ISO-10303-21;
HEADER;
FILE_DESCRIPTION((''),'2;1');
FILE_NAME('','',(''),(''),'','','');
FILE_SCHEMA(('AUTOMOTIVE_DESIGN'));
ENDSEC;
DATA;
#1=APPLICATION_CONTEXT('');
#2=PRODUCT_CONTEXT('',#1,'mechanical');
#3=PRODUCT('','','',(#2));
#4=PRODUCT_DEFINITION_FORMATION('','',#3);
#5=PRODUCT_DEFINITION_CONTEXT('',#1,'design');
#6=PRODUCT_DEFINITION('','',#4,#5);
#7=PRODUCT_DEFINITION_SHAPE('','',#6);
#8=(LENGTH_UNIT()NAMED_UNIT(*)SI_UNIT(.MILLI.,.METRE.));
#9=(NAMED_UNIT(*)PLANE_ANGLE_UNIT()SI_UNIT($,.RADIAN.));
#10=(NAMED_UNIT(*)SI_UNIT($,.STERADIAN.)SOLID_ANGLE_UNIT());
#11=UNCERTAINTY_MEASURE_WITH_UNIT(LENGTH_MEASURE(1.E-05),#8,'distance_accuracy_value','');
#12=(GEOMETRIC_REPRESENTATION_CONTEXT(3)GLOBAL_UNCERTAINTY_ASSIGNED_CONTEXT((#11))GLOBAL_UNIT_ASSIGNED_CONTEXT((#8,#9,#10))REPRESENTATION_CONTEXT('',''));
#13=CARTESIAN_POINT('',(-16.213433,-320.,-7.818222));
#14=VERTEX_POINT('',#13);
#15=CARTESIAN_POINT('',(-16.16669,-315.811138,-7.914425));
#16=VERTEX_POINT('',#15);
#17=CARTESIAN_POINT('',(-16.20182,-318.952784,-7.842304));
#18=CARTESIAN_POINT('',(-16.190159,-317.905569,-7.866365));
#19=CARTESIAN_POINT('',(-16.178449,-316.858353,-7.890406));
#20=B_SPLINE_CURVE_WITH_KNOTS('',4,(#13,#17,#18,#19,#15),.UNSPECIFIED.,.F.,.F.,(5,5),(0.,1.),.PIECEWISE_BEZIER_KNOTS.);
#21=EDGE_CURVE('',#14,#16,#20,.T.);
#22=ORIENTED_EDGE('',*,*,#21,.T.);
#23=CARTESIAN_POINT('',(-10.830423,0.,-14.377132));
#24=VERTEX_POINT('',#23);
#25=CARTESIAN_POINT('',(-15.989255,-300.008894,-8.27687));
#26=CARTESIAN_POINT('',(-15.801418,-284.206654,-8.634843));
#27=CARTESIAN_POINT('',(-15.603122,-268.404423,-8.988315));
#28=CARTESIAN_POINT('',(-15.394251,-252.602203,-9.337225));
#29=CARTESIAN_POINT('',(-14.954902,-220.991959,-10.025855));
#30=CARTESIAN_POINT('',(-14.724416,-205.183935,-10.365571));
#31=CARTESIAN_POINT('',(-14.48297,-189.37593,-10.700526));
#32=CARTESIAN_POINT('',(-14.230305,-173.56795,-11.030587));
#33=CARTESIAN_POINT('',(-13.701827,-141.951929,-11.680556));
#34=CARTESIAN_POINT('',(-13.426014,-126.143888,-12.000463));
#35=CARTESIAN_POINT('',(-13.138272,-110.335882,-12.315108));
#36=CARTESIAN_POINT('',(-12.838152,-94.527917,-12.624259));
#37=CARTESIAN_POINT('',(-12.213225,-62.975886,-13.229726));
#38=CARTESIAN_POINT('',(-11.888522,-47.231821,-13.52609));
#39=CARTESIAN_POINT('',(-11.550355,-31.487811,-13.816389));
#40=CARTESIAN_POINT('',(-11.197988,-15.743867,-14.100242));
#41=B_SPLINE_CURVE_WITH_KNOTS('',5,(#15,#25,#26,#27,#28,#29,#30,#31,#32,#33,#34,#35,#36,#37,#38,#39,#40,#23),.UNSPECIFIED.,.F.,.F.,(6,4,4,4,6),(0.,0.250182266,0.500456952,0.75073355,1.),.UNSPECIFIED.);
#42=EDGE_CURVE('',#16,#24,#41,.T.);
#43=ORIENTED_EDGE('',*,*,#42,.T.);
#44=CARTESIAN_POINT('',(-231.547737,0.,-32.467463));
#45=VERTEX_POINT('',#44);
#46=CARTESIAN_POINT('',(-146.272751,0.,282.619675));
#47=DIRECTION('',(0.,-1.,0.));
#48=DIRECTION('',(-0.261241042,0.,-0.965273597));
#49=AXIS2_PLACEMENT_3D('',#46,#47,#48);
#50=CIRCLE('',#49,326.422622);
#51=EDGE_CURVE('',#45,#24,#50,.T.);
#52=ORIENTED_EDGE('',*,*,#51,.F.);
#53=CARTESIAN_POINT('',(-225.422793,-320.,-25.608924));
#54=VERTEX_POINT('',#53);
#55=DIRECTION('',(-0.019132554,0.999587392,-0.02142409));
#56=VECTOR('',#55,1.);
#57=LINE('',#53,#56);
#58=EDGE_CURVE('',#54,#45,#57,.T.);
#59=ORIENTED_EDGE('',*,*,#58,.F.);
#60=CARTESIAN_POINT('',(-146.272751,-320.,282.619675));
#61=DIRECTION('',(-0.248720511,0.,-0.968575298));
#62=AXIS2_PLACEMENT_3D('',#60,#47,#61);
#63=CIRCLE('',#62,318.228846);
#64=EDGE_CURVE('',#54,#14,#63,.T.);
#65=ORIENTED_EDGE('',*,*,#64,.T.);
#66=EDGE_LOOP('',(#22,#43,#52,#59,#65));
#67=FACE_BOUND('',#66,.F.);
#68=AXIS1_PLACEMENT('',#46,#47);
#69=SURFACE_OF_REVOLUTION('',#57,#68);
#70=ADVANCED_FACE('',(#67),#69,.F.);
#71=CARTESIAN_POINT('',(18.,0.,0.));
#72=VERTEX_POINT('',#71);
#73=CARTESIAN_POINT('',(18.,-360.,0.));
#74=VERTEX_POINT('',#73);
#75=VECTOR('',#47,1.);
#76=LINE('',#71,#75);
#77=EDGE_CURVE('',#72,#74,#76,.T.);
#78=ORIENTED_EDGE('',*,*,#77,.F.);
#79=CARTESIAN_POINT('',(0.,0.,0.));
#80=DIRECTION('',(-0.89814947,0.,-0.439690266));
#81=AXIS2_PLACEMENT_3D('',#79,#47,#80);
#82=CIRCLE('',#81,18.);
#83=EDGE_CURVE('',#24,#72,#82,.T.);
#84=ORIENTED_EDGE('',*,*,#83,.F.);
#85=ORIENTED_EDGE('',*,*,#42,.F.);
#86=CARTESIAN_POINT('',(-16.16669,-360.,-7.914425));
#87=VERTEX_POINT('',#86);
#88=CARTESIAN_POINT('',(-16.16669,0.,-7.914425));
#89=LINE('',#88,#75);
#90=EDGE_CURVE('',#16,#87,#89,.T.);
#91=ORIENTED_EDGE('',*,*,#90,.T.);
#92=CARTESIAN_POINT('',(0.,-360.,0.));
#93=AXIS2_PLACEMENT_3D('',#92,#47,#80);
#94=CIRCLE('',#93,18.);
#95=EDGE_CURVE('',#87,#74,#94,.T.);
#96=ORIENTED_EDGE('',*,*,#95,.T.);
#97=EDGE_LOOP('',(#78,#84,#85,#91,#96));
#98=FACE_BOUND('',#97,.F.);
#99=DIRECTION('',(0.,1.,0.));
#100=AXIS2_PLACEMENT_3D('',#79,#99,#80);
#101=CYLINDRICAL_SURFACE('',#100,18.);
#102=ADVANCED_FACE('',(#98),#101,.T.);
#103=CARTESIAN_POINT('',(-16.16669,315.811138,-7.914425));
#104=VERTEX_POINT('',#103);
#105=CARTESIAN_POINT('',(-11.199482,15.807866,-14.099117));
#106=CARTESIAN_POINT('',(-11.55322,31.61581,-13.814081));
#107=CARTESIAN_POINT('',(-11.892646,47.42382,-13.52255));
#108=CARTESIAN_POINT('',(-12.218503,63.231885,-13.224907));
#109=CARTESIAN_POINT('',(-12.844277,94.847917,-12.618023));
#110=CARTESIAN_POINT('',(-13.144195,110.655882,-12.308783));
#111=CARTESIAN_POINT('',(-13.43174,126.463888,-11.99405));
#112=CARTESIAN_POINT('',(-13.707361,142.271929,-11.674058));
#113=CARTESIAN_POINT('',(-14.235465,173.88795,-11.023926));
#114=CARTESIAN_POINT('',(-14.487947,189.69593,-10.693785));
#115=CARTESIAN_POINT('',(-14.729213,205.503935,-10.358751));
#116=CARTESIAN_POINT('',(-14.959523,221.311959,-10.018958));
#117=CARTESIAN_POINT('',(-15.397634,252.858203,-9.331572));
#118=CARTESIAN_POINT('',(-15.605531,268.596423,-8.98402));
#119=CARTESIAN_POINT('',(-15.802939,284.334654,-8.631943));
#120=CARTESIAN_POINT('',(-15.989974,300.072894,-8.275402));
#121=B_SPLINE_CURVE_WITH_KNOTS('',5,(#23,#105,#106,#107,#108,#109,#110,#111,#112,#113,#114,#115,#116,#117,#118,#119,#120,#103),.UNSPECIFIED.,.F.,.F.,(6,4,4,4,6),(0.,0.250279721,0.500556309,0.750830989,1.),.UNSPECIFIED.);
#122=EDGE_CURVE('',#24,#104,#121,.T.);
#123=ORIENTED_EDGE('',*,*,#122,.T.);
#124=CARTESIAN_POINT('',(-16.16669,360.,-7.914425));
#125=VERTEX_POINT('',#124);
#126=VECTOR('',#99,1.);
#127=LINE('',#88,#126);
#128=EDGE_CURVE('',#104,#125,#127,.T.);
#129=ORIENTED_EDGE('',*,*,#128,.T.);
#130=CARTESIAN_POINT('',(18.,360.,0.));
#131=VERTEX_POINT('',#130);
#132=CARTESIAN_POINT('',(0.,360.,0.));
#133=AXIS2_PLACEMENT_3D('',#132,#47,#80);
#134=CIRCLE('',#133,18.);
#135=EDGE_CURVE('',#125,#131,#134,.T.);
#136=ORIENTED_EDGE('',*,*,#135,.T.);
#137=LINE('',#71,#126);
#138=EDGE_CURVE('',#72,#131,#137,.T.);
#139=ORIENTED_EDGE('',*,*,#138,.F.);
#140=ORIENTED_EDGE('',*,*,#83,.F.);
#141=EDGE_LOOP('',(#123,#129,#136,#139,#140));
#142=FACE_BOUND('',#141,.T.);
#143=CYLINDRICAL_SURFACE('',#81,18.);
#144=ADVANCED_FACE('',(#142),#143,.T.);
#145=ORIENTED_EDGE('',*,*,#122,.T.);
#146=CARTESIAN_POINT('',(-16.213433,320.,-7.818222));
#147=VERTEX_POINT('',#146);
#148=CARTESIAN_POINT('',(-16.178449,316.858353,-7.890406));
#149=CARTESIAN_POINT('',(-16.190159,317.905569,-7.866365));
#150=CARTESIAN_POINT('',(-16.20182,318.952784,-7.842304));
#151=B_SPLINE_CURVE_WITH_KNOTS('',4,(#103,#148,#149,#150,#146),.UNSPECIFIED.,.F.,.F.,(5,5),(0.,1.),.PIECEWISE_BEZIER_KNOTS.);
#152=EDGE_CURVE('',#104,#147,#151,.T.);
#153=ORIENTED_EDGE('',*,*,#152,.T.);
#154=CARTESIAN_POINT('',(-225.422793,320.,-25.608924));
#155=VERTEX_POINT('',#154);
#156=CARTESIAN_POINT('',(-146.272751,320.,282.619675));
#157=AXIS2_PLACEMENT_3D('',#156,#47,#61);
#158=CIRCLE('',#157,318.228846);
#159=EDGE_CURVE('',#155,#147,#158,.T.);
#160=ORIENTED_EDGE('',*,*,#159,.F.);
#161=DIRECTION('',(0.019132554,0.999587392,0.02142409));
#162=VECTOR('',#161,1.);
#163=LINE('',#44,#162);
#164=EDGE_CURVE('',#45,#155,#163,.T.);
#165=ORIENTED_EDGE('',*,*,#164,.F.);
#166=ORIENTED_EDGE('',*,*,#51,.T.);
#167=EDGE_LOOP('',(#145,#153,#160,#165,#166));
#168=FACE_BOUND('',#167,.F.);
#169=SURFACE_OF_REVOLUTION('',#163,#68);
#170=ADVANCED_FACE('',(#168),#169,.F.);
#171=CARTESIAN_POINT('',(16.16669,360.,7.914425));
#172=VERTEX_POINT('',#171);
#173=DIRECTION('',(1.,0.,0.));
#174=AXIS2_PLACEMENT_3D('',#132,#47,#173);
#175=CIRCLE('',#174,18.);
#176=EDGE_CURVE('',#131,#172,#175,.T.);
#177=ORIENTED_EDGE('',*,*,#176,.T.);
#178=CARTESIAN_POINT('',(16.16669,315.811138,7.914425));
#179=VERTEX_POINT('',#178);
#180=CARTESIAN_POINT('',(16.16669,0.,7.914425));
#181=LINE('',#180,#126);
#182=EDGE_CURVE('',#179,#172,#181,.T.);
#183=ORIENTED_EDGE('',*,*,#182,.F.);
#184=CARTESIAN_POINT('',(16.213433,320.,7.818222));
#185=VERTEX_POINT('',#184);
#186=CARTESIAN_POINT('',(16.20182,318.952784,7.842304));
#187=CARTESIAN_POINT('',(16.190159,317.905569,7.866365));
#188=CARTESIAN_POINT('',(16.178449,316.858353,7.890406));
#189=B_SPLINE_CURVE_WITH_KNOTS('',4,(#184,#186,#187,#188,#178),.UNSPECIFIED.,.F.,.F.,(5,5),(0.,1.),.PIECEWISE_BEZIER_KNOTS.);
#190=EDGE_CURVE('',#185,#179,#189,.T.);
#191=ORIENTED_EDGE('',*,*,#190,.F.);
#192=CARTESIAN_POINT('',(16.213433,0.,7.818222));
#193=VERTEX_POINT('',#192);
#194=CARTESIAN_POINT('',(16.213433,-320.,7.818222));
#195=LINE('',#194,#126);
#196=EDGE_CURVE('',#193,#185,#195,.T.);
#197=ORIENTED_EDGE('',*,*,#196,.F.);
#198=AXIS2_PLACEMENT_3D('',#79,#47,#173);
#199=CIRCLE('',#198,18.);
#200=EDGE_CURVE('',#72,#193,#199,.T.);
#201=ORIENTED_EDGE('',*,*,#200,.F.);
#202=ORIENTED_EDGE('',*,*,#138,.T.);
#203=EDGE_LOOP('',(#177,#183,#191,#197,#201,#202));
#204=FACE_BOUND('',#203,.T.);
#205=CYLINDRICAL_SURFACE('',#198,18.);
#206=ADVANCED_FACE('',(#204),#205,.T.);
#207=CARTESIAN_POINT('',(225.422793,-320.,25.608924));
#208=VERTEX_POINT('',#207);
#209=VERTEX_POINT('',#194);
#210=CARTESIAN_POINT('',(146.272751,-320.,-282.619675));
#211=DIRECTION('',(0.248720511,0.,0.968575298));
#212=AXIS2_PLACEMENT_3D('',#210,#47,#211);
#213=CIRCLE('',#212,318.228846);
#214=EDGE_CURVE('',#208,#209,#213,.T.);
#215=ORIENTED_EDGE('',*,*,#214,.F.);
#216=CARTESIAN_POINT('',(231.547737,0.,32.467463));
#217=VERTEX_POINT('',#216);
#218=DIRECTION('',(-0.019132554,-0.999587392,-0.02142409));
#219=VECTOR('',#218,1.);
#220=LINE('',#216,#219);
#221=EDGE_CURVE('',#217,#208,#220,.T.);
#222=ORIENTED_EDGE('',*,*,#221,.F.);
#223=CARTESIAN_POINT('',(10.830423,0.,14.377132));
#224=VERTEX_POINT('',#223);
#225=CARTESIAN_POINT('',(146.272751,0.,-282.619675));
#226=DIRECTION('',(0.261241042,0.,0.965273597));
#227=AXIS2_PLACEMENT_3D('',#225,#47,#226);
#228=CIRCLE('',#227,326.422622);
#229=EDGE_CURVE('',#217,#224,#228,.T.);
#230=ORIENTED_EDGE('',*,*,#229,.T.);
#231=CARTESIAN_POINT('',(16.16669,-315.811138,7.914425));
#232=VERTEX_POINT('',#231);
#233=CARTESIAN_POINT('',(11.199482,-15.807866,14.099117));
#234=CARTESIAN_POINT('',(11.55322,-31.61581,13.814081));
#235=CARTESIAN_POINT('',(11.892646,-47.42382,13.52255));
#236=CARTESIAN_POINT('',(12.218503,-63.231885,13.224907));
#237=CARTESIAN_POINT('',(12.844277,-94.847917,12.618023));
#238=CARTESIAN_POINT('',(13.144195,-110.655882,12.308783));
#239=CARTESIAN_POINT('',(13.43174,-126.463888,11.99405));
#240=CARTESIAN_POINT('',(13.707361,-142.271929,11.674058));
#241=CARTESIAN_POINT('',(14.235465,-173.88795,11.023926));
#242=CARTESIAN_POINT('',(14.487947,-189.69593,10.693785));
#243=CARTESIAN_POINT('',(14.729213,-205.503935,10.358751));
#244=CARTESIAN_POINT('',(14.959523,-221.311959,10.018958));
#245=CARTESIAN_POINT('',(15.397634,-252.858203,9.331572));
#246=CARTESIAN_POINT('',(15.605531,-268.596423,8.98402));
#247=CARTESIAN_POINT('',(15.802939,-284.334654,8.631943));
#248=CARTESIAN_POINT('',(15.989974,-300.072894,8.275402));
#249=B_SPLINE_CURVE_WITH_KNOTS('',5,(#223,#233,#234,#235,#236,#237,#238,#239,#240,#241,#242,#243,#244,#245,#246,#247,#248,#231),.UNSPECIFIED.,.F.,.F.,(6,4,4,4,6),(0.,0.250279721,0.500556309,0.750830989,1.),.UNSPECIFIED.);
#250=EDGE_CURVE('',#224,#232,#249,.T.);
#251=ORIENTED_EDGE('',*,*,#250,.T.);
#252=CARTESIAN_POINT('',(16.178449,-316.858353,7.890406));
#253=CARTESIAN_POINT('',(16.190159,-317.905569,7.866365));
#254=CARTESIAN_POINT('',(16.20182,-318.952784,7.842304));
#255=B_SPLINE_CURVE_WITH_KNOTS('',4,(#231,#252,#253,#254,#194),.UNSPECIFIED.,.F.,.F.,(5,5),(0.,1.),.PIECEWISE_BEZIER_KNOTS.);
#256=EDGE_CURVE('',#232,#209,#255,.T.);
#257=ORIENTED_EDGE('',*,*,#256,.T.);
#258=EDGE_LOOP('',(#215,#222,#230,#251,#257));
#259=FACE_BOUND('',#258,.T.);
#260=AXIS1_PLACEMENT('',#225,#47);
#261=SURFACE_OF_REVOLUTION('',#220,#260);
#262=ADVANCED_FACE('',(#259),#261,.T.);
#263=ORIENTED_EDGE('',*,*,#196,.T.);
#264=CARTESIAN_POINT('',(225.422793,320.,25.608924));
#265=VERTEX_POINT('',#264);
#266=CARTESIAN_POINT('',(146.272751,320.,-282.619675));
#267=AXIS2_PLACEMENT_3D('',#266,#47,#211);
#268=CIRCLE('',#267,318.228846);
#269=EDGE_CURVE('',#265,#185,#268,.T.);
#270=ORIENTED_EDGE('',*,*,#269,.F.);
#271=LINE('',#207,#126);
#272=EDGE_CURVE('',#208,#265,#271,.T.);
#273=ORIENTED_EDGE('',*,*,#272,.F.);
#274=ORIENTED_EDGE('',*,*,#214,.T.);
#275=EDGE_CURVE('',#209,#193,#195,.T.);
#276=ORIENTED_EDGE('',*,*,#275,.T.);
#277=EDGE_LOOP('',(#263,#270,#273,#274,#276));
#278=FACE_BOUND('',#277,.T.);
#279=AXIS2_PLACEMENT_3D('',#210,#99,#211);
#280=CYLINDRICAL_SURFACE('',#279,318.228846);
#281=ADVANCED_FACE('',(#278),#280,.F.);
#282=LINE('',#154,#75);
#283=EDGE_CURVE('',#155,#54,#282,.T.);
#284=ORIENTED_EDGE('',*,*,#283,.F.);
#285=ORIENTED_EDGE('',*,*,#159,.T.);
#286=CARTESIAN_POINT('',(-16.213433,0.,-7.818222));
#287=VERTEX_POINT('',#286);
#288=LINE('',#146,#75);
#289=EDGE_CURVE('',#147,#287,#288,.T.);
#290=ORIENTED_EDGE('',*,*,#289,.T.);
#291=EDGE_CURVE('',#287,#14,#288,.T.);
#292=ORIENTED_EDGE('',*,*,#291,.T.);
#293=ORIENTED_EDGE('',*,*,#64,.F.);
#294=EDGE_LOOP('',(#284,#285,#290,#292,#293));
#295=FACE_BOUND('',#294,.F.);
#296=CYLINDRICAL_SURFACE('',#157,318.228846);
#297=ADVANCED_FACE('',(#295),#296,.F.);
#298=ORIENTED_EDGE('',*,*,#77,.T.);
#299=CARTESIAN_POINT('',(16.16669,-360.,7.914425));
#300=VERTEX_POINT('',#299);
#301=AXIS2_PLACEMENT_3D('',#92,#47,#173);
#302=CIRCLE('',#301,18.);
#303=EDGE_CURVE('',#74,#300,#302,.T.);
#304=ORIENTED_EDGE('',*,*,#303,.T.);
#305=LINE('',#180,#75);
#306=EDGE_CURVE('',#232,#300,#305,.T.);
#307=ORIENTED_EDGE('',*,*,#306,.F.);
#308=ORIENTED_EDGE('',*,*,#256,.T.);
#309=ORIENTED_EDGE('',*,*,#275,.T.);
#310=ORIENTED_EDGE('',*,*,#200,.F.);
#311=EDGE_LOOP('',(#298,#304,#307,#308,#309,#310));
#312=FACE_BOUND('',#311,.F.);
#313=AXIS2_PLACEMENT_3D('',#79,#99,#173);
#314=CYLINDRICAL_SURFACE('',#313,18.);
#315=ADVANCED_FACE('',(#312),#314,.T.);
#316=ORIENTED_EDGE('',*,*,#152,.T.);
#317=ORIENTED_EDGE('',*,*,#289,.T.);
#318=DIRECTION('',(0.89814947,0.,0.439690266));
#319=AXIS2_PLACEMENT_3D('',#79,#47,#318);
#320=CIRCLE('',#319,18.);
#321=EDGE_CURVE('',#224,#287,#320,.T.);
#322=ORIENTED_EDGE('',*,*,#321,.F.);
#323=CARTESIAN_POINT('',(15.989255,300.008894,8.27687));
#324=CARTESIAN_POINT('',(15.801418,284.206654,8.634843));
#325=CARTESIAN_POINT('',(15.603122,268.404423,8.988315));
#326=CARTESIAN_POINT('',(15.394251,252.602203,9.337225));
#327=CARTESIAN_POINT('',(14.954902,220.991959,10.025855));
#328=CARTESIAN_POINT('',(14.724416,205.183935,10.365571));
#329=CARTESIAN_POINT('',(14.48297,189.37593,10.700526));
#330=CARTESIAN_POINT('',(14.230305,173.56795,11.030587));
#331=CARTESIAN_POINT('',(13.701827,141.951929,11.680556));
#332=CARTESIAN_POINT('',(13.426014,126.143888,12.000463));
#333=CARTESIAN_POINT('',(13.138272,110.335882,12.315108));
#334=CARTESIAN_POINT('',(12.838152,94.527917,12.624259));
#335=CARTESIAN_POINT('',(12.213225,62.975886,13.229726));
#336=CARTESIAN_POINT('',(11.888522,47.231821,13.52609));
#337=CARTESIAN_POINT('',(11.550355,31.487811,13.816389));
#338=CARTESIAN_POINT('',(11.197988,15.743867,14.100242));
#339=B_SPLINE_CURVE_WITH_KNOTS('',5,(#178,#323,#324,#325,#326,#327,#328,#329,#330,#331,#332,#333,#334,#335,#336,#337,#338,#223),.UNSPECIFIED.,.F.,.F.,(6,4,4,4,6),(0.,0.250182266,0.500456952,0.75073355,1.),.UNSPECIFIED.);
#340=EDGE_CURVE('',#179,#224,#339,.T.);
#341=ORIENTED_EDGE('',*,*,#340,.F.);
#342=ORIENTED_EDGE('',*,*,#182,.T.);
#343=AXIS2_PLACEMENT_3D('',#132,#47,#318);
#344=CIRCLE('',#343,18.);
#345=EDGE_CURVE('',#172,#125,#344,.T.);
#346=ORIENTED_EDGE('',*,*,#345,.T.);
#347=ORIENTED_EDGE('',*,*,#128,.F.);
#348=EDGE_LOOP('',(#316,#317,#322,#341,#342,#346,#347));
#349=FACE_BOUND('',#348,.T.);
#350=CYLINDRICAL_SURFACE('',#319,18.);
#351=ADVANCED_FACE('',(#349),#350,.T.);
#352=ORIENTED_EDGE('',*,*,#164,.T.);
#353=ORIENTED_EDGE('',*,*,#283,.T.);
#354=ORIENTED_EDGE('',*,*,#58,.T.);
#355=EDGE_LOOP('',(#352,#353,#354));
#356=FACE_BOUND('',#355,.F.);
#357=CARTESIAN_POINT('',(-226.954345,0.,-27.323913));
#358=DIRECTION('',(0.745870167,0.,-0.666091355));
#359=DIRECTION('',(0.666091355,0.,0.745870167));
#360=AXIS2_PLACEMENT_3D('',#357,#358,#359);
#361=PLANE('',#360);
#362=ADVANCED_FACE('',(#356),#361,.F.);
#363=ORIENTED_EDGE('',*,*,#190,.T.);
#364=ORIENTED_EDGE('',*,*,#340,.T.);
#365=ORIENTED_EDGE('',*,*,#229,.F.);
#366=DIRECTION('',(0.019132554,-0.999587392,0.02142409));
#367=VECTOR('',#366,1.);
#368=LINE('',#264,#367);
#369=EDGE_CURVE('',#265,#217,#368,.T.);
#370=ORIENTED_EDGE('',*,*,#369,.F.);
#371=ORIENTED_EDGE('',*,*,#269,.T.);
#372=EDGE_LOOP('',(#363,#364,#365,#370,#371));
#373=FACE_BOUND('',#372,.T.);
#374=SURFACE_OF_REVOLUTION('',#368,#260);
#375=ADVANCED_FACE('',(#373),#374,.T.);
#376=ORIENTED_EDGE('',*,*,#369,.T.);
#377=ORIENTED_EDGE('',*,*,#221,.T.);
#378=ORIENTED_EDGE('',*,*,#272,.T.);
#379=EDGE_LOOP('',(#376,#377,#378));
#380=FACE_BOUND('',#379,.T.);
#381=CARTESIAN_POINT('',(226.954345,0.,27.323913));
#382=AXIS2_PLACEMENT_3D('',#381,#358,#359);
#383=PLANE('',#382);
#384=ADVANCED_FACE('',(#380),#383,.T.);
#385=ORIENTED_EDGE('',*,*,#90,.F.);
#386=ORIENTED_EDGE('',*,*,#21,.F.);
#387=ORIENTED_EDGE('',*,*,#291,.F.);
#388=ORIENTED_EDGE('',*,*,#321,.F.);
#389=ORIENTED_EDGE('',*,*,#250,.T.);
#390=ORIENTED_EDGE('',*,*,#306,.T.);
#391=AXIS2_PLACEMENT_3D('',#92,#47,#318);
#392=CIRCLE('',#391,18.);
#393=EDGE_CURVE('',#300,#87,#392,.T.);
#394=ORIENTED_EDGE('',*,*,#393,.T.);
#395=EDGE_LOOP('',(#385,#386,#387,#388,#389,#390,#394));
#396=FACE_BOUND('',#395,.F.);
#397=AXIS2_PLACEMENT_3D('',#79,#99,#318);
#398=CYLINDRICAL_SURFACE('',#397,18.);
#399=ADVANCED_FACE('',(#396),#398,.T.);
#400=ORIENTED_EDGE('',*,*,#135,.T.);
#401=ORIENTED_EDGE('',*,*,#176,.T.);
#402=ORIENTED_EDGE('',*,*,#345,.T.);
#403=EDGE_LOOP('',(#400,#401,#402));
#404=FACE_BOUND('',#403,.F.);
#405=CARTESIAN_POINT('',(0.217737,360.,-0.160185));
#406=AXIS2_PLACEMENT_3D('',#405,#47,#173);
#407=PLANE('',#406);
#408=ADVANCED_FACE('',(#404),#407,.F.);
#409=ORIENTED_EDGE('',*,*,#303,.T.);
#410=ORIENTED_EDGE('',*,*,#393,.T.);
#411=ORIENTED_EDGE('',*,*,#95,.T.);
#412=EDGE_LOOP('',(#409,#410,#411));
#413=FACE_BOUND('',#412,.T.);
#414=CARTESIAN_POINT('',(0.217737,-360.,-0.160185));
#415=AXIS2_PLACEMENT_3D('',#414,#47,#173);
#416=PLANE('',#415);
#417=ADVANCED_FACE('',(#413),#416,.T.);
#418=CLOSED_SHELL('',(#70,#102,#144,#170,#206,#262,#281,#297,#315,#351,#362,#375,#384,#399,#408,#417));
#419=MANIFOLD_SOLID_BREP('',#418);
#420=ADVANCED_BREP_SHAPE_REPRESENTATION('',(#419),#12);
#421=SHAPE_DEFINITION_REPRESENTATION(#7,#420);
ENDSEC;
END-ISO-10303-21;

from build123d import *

# Parameters (mm, degrees)
F4_DEPTH = 360


with BuildPart() as f2:
    # F2: sweep along a path in F0
    with BuildLine(Plane.XZ) as f2_path:
        ThreePointArc((242.7527745604, 20.7435647383), (128.2776322592, 35.2070479661), (16.1666904568, 7.9144247848))
    # F1 (on Right) → F2 (sweep)
    with BuildSketch(Plane.YZ):
        Polygon((-320, 0), (0, 0), (320, 0), (0, 9.1953519732), align=None)
    sweep(path=f2_path.line)

    # F3: sweep along a path in F0
    with BuildLine(Plane.XZ) as f3_path:
        ThreePointArc((-242.7527745604, -20.7435647383), (-128.2776322592, -35.2070479661), (-16.1666904568, -7.9144247848))
    # F1 (on Right) → F3 (sweep)
    with BuildSketch(Plane.YZ):
        Polygon((320, 0), (0, 0), (-320, 0), (0, -9.1953519732), align=None)
    sweep(path=f3_path.line)

    # F0 (on Front) → F4 (join, symmetric)
    with BuildSketch(Plane.XZ):
        with BuildLine():
            ThreePointArc((-16.1666904568, -7.9144247848), (4.061992847, -17.5356840218), (18, 0))
            ThreePointArc((18, 0), (17.5356840218, 4.061992847), (16.1666904568, 7.9144247848))
            ThreePointArc((16.1666904568, 7.9144247848), (-7.9144247848, 16.1666904568), (-16.1666904568, -7.9144247848))
        make_face()
    extrude(amount=F4_DEPTH, both=True)


solid = f2.part
